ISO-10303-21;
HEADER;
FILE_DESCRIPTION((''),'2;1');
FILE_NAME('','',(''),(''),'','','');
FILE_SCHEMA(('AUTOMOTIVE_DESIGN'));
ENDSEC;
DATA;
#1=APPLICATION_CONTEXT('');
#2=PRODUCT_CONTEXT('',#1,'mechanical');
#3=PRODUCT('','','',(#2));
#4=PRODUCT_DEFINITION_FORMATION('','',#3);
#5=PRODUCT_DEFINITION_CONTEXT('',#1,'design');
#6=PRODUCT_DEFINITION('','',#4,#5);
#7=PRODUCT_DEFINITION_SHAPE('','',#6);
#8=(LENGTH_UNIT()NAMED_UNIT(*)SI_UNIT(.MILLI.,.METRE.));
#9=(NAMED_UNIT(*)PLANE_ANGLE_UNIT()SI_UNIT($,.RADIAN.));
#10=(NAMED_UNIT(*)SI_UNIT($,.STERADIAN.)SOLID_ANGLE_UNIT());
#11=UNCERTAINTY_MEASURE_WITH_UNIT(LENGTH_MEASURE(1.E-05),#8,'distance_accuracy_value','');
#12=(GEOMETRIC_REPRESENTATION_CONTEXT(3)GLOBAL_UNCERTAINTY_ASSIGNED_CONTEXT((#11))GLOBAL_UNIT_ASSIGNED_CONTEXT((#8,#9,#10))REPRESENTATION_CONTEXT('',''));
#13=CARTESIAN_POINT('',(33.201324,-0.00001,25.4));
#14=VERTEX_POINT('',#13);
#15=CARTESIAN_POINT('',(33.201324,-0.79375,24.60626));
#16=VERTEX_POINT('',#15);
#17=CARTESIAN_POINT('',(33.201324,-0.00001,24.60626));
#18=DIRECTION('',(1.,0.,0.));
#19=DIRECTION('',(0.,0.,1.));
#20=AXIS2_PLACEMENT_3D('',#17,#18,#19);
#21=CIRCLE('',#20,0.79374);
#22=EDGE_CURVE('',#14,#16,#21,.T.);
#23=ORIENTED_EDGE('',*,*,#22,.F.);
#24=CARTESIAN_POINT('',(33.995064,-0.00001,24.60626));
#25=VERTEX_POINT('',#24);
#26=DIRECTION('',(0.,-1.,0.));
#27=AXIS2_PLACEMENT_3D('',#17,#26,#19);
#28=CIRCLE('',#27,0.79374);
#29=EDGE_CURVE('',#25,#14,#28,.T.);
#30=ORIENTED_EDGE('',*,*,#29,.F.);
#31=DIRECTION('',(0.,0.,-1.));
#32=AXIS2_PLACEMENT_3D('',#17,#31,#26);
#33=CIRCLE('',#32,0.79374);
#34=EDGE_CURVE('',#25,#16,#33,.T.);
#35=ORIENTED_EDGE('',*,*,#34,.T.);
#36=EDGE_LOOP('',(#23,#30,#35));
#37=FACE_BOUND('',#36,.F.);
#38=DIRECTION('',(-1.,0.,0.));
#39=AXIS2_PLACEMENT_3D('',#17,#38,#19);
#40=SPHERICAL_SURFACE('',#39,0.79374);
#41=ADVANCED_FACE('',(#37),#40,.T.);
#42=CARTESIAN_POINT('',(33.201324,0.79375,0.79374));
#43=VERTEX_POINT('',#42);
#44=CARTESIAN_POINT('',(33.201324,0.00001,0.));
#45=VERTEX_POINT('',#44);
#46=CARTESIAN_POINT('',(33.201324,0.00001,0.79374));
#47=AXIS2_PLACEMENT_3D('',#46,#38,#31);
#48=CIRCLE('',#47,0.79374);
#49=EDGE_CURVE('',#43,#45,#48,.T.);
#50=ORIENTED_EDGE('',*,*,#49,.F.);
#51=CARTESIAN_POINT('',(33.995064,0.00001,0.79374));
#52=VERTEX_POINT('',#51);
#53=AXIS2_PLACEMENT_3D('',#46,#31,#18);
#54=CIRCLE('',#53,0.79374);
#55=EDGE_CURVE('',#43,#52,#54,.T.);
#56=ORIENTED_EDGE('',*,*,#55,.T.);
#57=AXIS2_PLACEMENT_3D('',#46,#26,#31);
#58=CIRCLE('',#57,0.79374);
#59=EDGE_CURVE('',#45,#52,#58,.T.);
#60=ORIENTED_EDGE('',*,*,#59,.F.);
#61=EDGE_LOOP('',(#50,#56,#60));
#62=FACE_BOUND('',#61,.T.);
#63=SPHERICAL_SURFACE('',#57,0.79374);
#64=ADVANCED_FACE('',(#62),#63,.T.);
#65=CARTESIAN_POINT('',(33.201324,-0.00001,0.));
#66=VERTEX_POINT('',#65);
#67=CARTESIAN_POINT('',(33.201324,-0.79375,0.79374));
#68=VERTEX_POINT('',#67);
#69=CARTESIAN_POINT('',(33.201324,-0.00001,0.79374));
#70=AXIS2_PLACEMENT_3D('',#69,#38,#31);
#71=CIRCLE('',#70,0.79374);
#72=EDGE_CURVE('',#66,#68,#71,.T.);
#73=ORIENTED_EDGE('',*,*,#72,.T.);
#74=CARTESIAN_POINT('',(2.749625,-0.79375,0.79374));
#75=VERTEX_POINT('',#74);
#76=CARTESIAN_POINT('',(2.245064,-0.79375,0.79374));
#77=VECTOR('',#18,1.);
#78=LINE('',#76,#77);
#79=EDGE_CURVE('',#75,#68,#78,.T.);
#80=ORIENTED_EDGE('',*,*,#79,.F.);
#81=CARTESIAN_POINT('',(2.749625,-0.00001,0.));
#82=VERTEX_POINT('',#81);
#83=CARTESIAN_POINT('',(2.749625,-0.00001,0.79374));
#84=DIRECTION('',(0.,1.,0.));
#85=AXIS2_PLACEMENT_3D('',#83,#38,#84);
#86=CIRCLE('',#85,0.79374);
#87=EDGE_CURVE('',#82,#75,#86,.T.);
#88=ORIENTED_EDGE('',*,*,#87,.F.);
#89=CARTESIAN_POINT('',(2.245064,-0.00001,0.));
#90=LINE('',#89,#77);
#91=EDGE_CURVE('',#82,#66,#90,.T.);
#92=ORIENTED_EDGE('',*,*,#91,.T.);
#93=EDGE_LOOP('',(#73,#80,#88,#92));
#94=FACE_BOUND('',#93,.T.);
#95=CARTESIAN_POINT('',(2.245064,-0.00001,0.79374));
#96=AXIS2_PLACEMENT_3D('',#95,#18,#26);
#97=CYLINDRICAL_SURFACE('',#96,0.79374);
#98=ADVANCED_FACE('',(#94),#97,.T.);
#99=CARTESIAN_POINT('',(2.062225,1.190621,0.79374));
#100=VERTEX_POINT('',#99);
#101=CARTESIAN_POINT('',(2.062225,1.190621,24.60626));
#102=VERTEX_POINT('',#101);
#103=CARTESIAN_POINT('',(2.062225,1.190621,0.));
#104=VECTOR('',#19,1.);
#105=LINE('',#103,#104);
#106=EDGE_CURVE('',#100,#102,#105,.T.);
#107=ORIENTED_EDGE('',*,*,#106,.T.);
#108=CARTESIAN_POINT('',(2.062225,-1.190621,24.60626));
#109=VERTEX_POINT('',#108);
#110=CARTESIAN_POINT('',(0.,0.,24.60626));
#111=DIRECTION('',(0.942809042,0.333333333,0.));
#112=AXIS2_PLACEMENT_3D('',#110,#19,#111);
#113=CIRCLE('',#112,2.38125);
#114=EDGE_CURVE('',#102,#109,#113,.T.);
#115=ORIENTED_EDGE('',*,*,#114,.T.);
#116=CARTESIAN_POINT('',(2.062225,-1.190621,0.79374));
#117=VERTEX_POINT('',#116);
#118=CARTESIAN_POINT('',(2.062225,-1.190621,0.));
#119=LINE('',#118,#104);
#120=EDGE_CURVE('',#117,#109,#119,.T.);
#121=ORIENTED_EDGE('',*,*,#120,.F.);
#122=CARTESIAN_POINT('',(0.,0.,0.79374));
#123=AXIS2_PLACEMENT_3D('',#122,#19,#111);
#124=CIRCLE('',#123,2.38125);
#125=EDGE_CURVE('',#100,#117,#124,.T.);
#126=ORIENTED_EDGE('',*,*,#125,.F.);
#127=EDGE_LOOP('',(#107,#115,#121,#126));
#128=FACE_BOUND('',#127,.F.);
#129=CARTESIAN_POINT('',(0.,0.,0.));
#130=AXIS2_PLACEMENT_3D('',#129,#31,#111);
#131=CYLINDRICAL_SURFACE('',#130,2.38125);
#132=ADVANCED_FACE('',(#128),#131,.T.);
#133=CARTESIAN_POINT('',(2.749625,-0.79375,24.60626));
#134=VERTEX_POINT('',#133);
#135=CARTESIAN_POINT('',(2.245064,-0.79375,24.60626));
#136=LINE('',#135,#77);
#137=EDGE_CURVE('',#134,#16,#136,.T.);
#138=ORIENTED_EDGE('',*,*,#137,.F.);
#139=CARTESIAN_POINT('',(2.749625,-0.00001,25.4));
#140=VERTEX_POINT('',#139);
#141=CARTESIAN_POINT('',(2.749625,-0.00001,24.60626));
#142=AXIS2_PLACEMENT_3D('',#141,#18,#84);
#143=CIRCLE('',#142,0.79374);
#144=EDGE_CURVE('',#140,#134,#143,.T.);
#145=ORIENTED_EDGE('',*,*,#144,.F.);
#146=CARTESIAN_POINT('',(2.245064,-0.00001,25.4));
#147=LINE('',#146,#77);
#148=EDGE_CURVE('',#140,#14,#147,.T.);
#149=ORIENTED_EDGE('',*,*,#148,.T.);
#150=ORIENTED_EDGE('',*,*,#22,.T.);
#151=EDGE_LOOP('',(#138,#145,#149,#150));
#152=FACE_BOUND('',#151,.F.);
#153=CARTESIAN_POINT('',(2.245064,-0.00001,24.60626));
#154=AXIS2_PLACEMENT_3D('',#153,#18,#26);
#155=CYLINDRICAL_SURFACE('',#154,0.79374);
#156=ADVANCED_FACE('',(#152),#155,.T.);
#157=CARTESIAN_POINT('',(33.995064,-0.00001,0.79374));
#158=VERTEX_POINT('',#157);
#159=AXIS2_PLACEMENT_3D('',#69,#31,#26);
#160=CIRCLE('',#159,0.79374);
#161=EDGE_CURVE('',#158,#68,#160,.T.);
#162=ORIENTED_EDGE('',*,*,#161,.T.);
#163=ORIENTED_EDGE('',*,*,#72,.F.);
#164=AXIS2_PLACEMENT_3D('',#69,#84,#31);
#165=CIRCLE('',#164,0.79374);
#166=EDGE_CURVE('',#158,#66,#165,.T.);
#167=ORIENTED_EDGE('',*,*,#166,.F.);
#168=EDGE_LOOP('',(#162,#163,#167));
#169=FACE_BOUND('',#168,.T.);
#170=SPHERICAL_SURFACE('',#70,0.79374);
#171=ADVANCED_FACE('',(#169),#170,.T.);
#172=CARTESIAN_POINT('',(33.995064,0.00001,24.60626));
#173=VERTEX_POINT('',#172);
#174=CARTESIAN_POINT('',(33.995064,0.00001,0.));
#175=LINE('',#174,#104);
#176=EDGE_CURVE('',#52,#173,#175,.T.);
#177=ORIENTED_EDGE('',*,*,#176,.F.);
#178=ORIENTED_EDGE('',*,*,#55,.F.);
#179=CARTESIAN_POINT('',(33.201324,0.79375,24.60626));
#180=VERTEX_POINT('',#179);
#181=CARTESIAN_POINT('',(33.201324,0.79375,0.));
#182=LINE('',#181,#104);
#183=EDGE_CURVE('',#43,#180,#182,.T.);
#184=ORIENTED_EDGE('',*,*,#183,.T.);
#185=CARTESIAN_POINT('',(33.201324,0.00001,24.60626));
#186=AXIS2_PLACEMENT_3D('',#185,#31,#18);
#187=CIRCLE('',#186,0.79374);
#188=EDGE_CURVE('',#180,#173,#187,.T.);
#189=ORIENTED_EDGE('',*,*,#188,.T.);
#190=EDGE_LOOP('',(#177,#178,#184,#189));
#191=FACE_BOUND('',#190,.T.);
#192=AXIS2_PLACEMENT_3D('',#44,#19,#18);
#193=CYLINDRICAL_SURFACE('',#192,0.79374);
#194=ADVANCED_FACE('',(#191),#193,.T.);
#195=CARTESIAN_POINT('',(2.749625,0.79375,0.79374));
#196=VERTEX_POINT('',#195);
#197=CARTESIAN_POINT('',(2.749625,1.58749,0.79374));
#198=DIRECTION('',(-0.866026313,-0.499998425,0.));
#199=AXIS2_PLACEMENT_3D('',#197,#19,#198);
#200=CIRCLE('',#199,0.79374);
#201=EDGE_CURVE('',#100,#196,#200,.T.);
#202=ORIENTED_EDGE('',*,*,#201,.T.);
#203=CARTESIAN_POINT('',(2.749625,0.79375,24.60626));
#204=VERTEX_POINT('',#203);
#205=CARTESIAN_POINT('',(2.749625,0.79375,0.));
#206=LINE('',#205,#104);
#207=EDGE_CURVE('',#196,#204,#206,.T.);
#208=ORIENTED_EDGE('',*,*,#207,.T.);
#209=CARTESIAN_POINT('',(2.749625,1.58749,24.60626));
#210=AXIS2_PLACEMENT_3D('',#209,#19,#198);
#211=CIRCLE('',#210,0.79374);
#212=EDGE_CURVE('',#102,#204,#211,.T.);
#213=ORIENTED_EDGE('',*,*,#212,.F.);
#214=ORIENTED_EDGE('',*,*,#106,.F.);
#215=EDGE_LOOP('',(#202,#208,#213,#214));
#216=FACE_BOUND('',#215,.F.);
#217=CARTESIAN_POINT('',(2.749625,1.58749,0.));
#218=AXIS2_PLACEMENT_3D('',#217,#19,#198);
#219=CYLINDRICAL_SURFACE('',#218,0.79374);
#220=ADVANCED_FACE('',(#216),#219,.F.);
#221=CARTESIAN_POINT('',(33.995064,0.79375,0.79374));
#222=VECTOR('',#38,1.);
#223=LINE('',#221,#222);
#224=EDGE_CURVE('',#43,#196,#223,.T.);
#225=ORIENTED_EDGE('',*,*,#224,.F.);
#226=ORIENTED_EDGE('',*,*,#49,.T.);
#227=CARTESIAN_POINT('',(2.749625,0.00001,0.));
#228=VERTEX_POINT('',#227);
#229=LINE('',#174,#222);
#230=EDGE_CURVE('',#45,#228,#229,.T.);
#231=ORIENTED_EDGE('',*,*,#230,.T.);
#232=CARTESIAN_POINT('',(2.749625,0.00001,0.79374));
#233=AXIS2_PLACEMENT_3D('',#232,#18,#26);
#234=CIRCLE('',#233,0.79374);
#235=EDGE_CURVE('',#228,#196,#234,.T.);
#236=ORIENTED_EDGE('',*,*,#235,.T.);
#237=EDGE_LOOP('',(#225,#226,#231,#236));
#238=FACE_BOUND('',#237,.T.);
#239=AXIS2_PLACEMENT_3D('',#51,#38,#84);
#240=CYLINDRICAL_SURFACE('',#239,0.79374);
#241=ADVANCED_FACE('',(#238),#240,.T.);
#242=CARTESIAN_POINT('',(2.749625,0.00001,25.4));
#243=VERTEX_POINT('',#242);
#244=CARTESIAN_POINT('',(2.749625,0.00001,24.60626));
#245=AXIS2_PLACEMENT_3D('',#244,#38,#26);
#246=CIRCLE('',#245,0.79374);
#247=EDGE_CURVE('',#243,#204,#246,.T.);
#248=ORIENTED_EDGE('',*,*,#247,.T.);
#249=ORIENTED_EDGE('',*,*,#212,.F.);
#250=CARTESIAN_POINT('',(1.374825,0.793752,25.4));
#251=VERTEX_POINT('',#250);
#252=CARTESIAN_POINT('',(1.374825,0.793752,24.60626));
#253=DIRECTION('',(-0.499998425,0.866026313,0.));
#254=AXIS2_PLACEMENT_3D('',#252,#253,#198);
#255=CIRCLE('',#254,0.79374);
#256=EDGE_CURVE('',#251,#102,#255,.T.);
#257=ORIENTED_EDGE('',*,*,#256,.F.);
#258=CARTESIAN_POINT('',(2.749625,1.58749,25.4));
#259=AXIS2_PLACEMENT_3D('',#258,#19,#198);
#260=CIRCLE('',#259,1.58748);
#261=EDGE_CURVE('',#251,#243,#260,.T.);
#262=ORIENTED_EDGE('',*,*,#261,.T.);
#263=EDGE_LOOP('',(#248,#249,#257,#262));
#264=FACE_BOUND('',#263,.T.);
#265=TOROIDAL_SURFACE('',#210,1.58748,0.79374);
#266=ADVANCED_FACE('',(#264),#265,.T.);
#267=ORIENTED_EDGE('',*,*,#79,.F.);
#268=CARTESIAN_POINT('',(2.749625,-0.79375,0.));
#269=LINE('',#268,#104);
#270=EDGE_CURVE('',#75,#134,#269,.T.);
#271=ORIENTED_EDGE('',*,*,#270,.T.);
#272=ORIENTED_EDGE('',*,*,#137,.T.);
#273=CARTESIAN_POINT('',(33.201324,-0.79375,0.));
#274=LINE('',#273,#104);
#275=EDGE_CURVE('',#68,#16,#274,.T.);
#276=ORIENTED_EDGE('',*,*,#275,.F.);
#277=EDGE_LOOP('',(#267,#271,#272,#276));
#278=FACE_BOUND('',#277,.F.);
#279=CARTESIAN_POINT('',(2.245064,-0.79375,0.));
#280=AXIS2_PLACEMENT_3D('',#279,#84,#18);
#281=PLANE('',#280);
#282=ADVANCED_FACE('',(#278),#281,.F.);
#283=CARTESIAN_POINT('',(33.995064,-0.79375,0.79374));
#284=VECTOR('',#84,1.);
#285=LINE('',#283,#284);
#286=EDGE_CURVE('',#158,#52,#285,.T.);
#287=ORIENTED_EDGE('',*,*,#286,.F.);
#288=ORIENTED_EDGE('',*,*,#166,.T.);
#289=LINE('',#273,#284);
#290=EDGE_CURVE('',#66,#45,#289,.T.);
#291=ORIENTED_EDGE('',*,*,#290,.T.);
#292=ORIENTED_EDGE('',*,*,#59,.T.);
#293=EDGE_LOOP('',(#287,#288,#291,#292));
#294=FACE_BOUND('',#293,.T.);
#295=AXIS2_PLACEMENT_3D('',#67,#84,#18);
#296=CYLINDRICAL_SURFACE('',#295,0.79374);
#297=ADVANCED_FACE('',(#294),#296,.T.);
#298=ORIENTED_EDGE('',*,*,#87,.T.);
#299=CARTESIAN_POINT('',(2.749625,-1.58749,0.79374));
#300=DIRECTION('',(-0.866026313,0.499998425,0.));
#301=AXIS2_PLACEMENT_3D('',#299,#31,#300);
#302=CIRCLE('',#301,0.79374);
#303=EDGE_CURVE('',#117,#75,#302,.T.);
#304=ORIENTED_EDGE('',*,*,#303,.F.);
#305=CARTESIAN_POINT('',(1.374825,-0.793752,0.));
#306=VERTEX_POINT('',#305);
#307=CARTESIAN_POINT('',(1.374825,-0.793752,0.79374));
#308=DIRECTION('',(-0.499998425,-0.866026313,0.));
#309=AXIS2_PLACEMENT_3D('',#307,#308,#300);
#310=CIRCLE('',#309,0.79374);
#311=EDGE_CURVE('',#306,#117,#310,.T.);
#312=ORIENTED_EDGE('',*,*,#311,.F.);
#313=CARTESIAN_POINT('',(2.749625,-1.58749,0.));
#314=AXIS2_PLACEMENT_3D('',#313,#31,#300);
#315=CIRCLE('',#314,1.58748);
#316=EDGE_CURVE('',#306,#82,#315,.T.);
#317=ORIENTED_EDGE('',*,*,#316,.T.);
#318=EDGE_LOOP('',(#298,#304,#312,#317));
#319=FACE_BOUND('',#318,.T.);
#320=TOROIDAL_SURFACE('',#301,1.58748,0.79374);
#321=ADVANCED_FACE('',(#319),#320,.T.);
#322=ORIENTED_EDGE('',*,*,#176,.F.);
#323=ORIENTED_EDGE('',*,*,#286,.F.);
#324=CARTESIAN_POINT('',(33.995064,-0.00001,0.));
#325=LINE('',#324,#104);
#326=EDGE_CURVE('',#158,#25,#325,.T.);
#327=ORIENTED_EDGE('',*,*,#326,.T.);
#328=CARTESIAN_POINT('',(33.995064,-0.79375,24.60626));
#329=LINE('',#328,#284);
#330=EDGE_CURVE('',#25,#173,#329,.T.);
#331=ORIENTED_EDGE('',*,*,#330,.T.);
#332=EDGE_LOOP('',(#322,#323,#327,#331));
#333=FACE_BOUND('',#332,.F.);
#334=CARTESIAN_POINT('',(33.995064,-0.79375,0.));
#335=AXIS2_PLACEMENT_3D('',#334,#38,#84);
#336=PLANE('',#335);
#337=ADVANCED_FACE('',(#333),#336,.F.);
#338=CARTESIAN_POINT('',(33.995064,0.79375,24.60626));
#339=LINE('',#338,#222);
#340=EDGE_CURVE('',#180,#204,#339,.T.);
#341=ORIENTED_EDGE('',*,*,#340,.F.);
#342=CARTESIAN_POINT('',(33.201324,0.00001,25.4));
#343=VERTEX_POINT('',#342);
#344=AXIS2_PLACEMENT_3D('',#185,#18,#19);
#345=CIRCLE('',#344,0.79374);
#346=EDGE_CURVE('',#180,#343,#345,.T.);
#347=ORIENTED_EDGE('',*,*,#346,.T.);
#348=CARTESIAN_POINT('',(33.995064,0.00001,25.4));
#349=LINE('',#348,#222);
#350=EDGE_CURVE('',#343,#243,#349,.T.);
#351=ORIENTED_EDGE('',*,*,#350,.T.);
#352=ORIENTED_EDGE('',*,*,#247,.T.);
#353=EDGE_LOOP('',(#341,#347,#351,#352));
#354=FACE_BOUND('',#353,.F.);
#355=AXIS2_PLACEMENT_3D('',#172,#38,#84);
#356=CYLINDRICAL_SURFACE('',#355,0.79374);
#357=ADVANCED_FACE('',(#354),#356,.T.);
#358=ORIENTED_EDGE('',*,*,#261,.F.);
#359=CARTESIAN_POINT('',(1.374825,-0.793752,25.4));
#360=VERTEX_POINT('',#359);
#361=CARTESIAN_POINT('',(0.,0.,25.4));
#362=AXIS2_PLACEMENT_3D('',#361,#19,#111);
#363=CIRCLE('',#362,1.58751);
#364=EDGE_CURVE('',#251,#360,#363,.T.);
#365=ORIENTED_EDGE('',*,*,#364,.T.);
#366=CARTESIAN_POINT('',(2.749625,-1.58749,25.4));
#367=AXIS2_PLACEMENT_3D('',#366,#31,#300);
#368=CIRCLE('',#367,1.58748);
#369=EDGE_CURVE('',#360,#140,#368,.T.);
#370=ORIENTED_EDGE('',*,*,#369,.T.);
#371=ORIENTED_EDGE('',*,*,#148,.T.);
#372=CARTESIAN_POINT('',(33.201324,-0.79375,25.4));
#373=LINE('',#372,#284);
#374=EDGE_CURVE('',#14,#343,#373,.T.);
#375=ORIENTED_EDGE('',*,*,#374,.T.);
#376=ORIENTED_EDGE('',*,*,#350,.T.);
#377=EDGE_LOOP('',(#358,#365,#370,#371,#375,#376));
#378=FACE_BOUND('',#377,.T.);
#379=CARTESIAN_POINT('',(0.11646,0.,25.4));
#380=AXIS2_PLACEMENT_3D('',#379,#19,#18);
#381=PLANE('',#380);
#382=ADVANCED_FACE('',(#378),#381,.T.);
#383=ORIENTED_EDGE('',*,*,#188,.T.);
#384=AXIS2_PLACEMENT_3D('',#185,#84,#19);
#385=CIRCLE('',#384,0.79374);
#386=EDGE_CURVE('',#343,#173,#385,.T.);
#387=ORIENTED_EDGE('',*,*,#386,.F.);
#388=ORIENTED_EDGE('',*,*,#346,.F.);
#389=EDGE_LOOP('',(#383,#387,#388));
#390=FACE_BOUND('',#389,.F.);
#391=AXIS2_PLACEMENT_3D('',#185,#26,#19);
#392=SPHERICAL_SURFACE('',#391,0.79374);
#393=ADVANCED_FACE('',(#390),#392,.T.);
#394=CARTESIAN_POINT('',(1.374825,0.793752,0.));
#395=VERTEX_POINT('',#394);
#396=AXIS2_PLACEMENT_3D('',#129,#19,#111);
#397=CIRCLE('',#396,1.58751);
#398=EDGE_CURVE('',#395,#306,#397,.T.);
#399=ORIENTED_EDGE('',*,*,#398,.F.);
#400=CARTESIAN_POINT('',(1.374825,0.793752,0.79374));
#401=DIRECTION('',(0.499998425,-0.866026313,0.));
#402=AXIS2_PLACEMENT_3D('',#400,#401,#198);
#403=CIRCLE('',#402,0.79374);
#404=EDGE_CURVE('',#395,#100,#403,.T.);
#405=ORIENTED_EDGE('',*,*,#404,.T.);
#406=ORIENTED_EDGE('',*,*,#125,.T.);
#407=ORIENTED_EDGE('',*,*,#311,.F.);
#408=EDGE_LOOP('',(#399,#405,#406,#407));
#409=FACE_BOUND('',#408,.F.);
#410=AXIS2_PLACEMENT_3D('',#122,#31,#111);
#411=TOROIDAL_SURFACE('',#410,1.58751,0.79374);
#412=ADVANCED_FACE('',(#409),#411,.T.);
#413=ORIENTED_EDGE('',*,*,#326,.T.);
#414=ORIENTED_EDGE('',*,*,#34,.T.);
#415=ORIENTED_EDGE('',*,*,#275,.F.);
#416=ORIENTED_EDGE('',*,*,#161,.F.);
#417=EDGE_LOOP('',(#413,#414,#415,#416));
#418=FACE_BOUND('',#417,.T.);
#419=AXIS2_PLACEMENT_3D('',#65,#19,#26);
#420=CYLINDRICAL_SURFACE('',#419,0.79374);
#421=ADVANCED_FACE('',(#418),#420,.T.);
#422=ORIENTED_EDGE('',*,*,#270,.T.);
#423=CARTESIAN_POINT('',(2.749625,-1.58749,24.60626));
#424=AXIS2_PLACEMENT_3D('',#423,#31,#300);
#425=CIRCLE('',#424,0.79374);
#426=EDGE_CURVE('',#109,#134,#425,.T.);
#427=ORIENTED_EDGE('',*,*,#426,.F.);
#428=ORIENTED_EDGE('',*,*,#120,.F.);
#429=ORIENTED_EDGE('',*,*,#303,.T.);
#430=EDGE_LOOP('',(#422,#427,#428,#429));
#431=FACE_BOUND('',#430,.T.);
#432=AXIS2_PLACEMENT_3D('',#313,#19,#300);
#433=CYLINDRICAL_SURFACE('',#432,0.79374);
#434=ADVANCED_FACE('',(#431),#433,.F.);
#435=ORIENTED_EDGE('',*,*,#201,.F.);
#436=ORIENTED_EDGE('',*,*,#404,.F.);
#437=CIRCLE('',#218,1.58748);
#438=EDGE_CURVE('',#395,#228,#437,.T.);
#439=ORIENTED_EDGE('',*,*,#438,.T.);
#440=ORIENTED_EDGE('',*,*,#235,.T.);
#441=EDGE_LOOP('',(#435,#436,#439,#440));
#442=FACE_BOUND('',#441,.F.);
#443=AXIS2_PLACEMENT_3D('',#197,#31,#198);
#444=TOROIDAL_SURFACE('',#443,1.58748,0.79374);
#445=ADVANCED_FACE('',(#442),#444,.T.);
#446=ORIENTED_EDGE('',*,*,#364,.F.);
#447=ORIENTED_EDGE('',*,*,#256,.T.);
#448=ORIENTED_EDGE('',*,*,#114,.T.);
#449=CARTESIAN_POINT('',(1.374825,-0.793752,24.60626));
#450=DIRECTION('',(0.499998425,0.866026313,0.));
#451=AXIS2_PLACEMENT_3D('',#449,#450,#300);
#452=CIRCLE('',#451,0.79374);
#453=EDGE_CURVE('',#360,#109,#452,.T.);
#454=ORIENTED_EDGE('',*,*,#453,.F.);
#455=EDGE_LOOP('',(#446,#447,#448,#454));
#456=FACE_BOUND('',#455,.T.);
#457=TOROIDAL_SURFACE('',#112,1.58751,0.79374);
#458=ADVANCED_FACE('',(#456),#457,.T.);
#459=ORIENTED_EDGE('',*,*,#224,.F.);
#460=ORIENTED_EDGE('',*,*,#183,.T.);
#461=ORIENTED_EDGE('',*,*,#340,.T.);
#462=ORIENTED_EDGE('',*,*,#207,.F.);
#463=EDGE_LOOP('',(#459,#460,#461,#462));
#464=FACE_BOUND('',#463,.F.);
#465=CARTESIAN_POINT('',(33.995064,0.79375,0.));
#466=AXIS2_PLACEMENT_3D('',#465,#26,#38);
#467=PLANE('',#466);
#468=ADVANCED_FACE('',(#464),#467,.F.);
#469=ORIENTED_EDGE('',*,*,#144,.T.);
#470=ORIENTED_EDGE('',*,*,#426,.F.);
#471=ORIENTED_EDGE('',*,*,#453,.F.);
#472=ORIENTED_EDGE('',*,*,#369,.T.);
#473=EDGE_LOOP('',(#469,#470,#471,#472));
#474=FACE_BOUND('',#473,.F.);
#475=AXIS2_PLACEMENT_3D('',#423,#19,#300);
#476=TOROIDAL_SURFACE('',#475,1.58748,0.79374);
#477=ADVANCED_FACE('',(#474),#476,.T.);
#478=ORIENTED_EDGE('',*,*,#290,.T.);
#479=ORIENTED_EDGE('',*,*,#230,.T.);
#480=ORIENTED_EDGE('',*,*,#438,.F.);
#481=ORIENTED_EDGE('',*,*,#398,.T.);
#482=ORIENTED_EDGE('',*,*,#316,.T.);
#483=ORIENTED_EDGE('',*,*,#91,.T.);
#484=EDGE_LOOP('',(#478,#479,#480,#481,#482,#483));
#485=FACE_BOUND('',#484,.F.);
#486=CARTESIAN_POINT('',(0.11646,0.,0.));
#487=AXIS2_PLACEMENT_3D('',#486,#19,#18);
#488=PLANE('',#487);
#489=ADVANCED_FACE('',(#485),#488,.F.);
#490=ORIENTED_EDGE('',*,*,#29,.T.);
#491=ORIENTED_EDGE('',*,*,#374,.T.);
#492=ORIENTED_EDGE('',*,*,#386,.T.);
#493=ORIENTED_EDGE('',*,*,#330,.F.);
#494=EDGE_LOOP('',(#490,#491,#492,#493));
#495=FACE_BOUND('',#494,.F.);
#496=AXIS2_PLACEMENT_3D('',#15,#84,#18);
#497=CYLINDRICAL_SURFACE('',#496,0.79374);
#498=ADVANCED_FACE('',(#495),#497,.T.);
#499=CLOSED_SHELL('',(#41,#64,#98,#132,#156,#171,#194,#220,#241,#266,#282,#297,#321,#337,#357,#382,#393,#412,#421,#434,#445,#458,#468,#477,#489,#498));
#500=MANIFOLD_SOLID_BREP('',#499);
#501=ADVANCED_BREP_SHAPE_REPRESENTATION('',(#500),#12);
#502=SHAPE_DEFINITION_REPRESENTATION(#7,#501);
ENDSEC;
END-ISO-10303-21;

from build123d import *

# Parameters (mm, degrees)
F1_DEPTH = 25.4
F2_R     = 0.79374


# Not quite as in the source:
# - a fillet or chamfer is up to 0.001 mm smaller than in the source, because OpenCascade refuses the exact size
# - a feature names something its author has since deleted; it is built from what else it names


with BuildPart() as f1:
    # F0 (on Top) → F1 (new body)
    with BuildSketch(Plane.XY):
        with BuildLine():
            ThreePointArc((2.2450640303, -0.79375), (2.3469565702, -0.4026740868), (2.38125, 0))
            ThreePointArc((2.38125, 0), (2.3469565702, 0.4026740868), (2.2450640303, 0.79375))
            ThreePointArc((2.2450640303, 0.79375), (-2.38125, 0), (2.2450640303, -0.79375))
        make_face()
        with BuildLine():
            ThreePointArc((2.2450640303, 0.79375), (2.3469565702, 0.4026740868), (2.38125, 0))
            ThreePointArc((2.38125, 0), (2.3469565702, -0.4026740868), (2.2450640303, -0.79375))
            Line((2.2450640303, -0.79375), (33.9950640303, -0.79375))
            Line((33.9950640303, -0.79375), (33.9950640303, 0))
            Line((33.9950640303, 0), (33.9950640303, 0.79375))
            Line((33.9950640303, 0.79375), (2.2450640303, 0.79375))
        make_face()
    extrude(amount=F1_DEPTH)

    # F2 (radius 0.79375 in the source; OpenCascade refuses exactly that, so slightly less here)
    f2_edges = [f1.edges().sort_by_distance(p)[0] for p in [
        (-2.38125, 0, 25.4),
        (18.120064, -0.79375, 25.4),
        (33.995064, 0, 25.4),
        (18.120064, 0.79375, 25.4),
        (-2.38125, 0, 0),
        (18.120064, -0.79375, 0),
        (33.995064, 0, 0),
        (18.120064, 0.79375, 0),
        (33.995064, 0.79375, 12.7),
        (2.245064, 0.79375, 12.7),
        (2.245064, -0.79375, 12.7),
        (33.995064, -0.79375, 12.7),
    ]]
    fillet(f2_edges, radius=F2_R)


solid = f1.part
